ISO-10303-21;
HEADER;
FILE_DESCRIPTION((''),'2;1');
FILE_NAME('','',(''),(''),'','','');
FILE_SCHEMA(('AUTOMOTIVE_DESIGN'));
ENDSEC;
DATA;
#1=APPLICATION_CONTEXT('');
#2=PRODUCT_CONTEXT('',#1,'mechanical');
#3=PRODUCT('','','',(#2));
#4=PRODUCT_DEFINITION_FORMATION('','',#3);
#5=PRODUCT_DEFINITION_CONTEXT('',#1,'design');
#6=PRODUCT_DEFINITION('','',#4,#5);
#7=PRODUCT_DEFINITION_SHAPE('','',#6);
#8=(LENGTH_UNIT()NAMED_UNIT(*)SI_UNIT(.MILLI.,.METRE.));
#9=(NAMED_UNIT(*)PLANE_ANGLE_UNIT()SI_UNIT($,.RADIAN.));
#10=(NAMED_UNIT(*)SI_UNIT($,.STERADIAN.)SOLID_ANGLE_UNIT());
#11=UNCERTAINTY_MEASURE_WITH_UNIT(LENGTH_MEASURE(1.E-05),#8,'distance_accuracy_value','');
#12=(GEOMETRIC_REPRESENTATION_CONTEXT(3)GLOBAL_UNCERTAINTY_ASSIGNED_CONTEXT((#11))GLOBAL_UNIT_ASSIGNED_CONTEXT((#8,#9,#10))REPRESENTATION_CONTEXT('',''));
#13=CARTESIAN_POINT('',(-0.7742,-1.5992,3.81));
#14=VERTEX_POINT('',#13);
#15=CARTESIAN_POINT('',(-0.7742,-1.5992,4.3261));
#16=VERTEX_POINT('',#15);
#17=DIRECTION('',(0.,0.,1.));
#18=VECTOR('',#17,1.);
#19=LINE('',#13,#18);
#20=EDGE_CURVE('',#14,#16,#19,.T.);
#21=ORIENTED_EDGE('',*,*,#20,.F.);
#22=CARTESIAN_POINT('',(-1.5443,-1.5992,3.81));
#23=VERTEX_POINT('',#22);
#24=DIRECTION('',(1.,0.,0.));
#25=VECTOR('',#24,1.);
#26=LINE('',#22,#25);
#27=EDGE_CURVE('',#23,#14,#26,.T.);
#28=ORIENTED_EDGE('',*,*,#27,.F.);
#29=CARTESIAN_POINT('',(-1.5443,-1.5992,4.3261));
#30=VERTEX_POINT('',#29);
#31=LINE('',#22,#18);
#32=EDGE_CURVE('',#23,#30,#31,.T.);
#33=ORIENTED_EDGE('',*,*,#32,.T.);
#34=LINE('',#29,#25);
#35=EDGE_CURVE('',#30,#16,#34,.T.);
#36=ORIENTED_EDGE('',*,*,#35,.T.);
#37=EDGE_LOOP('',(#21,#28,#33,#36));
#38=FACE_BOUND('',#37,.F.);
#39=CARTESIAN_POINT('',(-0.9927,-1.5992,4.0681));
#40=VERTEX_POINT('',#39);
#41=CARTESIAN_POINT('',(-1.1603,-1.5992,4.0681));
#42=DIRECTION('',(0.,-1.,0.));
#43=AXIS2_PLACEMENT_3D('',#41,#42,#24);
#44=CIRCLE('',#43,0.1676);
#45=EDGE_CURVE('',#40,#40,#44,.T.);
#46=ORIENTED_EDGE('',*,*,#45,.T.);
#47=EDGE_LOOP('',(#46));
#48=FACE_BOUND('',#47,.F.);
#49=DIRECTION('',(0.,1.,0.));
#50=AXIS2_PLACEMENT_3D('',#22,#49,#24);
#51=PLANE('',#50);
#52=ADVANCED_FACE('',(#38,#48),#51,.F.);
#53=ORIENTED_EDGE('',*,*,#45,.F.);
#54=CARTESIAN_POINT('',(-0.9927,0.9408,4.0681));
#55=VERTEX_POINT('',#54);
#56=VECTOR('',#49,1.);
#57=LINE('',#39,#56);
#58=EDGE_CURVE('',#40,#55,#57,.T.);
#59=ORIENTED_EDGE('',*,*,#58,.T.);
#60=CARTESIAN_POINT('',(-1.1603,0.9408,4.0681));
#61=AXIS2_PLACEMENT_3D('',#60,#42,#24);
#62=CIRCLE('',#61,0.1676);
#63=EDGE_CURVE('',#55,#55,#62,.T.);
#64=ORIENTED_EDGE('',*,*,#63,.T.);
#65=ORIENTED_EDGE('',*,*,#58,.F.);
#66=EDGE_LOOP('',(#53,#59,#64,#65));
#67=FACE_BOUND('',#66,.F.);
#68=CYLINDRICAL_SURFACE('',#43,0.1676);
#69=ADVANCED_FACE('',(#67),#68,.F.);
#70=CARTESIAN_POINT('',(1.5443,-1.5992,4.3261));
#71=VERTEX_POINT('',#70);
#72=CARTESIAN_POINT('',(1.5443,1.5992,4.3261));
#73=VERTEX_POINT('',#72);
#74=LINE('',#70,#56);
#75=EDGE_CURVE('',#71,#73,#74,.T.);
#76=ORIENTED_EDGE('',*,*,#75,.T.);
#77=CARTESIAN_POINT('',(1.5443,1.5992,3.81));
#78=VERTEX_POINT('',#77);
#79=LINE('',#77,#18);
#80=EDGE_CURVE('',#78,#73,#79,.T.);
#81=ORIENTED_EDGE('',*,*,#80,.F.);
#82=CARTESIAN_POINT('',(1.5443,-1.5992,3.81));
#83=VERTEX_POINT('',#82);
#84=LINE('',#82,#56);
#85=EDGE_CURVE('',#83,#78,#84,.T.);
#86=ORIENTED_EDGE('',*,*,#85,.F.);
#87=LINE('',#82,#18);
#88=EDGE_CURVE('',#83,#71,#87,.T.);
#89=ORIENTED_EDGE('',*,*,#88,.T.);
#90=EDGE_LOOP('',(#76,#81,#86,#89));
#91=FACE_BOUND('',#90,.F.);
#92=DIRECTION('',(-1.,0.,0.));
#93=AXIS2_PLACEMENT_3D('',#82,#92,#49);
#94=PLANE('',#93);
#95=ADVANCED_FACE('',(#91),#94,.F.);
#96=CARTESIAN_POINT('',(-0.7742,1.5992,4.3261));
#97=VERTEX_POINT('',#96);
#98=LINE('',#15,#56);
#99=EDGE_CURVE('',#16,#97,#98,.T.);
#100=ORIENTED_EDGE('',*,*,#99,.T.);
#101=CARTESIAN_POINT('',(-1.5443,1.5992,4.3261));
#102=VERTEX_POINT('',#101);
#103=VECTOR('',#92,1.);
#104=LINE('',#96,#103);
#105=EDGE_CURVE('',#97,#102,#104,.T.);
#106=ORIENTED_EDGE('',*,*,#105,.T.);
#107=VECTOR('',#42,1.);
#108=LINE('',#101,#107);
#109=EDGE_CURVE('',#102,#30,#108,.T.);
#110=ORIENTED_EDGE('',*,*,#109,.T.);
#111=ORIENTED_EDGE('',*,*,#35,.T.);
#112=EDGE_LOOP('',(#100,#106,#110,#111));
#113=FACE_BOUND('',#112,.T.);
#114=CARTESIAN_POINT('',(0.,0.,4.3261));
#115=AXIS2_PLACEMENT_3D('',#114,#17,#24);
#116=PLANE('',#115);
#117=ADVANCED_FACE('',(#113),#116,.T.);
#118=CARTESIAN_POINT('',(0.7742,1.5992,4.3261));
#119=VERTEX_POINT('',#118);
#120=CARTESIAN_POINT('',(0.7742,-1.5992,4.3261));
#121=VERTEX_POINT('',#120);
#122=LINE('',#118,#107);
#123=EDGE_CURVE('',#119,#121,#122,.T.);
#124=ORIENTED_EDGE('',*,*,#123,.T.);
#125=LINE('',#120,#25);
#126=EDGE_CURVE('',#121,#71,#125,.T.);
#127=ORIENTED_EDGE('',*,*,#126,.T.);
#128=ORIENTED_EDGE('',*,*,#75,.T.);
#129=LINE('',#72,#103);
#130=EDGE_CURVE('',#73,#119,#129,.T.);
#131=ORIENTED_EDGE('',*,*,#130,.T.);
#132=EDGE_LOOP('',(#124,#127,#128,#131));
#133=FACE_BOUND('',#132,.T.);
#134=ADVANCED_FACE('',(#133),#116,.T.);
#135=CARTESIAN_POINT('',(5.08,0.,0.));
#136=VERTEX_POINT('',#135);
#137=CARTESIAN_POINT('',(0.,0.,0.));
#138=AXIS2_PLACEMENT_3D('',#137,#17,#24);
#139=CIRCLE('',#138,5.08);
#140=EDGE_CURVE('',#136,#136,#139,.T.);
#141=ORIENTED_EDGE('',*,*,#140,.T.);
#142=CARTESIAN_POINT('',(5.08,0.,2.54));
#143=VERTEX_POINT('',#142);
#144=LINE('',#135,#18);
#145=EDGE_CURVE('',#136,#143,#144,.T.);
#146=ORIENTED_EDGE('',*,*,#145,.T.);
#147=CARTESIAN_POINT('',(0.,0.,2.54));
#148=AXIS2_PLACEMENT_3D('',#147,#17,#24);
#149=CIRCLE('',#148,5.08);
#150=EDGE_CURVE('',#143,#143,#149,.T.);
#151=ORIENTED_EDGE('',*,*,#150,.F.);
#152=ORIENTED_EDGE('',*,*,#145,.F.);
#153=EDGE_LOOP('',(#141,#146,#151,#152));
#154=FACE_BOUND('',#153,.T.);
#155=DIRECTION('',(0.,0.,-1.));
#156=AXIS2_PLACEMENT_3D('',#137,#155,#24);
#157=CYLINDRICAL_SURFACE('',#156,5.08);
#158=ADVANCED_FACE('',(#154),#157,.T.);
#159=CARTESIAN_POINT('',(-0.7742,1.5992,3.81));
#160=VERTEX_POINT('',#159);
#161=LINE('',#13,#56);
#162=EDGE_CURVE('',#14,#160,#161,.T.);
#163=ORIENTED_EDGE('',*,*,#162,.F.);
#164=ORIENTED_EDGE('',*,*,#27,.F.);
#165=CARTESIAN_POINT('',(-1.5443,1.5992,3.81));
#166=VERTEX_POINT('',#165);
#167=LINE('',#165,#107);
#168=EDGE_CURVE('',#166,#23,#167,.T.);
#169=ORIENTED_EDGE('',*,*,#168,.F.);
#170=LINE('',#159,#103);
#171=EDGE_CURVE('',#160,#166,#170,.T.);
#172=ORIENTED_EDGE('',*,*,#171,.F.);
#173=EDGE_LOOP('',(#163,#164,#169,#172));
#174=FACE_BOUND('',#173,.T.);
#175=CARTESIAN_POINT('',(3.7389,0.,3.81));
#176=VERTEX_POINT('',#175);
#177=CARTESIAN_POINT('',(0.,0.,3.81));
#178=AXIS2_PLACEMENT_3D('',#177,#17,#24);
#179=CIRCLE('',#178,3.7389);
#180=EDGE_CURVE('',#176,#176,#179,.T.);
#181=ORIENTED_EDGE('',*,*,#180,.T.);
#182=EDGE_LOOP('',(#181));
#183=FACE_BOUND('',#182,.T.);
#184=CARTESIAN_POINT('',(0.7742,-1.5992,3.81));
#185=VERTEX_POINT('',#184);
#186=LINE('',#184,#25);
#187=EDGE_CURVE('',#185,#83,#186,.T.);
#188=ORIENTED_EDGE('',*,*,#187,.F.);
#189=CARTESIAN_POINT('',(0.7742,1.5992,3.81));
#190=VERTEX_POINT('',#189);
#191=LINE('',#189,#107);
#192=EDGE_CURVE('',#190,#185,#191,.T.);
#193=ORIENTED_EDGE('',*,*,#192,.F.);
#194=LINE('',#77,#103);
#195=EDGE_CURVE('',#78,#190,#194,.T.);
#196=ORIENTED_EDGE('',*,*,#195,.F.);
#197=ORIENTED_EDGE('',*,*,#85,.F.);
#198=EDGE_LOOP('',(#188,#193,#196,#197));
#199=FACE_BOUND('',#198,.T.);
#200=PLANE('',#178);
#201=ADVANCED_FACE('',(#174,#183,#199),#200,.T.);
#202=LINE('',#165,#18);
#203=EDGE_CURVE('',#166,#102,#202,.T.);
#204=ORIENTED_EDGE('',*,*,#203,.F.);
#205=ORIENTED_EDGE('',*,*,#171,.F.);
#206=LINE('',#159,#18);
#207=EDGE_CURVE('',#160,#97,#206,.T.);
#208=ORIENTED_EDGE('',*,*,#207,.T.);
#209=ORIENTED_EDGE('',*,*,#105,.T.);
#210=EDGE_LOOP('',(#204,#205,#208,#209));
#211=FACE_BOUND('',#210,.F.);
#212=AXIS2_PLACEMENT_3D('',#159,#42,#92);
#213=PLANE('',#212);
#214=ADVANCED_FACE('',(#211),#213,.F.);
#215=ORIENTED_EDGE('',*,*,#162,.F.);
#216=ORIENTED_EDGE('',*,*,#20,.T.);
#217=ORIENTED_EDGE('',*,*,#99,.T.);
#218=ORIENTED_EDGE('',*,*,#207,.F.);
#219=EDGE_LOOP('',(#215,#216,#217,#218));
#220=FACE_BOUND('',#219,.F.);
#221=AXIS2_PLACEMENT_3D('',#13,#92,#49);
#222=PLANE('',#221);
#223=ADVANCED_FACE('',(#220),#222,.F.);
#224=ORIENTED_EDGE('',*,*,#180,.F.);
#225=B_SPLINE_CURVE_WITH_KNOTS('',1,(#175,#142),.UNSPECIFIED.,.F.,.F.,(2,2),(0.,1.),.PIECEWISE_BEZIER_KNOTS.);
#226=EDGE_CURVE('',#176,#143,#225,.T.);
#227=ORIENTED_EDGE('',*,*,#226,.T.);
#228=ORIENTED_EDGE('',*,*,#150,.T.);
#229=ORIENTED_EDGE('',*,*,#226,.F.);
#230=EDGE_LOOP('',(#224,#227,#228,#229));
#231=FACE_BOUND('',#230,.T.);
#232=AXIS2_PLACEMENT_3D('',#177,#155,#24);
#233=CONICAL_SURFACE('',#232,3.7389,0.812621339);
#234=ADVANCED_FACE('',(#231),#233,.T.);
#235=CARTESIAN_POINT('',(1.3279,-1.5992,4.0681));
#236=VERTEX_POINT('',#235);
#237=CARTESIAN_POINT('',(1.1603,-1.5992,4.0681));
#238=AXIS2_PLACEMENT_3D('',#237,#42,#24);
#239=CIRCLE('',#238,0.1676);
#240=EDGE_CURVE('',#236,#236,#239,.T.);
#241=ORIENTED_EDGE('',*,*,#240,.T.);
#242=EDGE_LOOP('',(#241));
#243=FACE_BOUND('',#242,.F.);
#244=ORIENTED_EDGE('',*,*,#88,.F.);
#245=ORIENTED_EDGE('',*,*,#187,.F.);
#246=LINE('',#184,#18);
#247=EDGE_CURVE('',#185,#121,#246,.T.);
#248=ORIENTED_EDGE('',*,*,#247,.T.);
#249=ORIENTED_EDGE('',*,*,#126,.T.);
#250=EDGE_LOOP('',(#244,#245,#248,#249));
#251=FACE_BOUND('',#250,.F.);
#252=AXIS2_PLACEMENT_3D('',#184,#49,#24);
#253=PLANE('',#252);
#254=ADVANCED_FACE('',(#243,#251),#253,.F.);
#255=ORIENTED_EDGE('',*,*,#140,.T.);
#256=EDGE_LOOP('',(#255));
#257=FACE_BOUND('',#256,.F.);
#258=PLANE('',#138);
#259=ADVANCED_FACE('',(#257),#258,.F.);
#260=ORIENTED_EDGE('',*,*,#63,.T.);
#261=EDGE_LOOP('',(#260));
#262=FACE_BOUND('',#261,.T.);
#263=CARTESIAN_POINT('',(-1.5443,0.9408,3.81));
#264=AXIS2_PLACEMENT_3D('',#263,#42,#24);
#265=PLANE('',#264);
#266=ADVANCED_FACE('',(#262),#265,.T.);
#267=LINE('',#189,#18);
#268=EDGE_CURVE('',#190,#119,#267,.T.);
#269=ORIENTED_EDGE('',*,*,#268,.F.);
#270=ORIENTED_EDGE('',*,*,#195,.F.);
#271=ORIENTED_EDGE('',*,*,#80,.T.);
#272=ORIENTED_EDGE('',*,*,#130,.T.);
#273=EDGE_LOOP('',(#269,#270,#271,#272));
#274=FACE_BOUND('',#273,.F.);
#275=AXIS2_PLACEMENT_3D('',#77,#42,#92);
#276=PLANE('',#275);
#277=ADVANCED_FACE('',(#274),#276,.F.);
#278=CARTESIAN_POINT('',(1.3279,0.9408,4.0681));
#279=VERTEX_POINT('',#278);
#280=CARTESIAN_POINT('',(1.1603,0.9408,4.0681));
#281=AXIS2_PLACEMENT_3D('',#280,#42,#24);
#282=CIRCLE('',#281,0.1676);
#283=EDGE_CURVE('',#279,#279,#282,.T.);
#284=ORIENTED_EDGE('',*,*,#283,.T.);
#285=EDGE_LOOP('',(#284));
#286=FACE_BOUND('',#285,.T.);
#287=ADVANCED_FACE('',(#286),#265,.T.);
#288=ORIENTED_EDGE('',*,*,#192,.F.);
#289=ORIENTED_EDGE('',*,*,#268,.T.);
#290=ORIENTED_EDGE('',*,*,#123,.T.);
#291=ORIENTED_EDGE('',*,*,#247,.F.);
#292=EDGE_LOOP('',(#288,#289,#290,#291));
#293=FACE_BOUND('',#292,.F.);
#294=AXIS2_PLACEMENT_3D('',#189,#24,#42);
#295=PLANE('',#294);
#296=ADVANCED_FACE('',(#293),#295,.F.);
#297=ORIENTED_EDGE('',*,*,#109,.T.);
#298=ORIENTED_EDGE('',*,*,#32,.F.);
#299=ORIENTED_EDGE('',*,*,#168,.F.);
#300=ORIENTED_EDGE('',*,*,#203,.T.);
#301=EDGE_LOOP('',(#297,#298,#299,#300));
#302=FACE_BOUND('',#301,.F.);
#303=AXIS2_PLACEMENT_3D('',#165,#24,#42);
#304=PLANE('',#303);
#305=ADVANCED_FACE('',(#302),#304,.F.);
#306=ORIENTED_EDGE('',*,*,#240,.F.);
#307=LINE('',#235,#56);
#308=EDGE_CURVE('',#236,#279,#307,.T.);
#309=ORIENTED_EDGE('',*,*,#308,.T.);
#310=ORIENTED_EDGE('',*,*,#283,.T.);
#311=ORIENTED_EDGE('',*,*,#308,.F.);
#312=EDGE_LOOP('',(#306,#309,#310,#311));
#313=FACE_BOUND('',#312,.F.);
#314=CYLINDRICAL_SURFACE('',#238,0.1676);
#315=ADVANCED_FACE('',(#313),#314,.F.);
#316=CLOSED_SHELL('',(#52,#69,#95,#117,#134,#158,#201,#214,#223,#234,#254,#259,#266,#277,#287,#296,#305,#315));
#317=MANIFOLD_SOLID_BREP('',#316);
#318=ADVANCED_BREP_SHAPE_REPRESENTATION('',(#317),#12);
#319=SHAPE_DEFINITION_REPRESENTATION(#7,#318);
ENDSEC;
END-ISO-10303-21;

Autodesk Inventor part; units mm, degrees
ref_plane "YZ Plane" through (0, 0, 0) normal (1, 0, 0) x (0, 1, 0)
ref_plane "XZ Plane" through (0, 0, 0) normal (0, 1, 0) x (-1, 0, 0)
sketch "Sketch3" plane through (0, 0, 0) normal (0, 0, 1) x (1, 0, 0)
  circle A0 centre (0, 0) radius 5.08
  dimension "d0" = 10.16
extrude "Extrusion1" add sketch "Sketch3" along normal blind 2.54
ref_plane "Work Plane1" through (0, 0, 3.81) normal (0, 0, 1) x (1, 0, 0)
sketch "Sketch4" plane through (0, 0, 3.81) normal (0, 0, 1) x (1, 0, 0)
  circle A0 centre (0, 0) radius 3.7389
  dimension "d4" = 7.4778
loft "Loft1" add profiles "Sketch4" section 2 edges at (-5.08, 0, 2.54)
sketch "Sketch5" plane through (0, 0, 3.81) normal (0, 0, 1) x (1, 0, 0)
  line L0 (-1.5443, -1.5992) -> (-0.7742, -1.5992)
  line L1 (-0.7742, -1.5992) -> (-0.7742, 1.5992)
  line L2 (-0.7742, 1.5992) -> (-1.5443, 1.5992)
  line L3 (-1.5443, 1.5992) -> (-1.5443, -1.5992)
  line L4 (0.7742, -1.5992) -> (1.5443, -1.5992)
  line L5 (1.5443, -1.5992) -> (1.5443, 1.5992)
  line L6 (1.5443, 1.5992) -> (0.7742, 1.5992)
  line L7 (0.7742, 1.5992) -> (0.7742, -1.5992)
  point P0 (0, 0)
  dimension "d9" = 0.7742
  dimension "d10" = 0.7742
  dimension "d11" = 1.5443
  dimension "d12" = 1.5443
  dimension "d23" = 1.5992
  dimension "d24" = 1.5992
extrude "Extrusion2" add sketch "Sketch5" along normal blind 0.5161
sketch "Sketch6" plane through (-1.5443, -1.5992, 3.81) normal (0, -1, 0) x (1, 0, 0)
  circle A0 centre (0.384, 0.2581) radius 0.1676
  circle A1 centre (2.7046, 0.2581) radius 0.1676
  line L0 (0.7701, 0) -> (0.7701, 0.5161) projected
  line L1 (2.3185, 0) -> (2.3185, 0.5161) projected
  line L2 (-2.1946, 0) -> (5.2832, 0) projected
  point P0 (1.5443, -3.81)
  dimension "d15" = 0.3353
  dimension "d16" = 0.3353
  dimension "d17" = 0.3861
  dimension "d18" = 0.3861
  dimension "d25" = 0.2581
  dimension "d26" = 0.2581
  dimension "d27" = 0.5161
extrude "Extrusion3" cut sketch "Sketch6" against normal blind 2.54
equation "\"d4\" = 0.736 * d0"
equation "\"d9\" = 0.0762 * d0"
equation "\"d10\" = d9"
equation "\"d11\" = 0.152 * d0"
equation "\"d12\" = d11"
equation "\"d23\" = 0.1574 * d0"
equation "\"d24\" = d23"
equation "\"d13\" = 0.0508 * d0"
equation "\"d15\" = 0.033 * d0"
equation "\"d16\" = d15"
equation "\"d17\" = 0.038 * d0"
equation "\"d18\" = d17"
equation "\"d25\" = 0.5 * d27"
equation "\"d26\" = d25"
properties part number "Dynamic Driver"
